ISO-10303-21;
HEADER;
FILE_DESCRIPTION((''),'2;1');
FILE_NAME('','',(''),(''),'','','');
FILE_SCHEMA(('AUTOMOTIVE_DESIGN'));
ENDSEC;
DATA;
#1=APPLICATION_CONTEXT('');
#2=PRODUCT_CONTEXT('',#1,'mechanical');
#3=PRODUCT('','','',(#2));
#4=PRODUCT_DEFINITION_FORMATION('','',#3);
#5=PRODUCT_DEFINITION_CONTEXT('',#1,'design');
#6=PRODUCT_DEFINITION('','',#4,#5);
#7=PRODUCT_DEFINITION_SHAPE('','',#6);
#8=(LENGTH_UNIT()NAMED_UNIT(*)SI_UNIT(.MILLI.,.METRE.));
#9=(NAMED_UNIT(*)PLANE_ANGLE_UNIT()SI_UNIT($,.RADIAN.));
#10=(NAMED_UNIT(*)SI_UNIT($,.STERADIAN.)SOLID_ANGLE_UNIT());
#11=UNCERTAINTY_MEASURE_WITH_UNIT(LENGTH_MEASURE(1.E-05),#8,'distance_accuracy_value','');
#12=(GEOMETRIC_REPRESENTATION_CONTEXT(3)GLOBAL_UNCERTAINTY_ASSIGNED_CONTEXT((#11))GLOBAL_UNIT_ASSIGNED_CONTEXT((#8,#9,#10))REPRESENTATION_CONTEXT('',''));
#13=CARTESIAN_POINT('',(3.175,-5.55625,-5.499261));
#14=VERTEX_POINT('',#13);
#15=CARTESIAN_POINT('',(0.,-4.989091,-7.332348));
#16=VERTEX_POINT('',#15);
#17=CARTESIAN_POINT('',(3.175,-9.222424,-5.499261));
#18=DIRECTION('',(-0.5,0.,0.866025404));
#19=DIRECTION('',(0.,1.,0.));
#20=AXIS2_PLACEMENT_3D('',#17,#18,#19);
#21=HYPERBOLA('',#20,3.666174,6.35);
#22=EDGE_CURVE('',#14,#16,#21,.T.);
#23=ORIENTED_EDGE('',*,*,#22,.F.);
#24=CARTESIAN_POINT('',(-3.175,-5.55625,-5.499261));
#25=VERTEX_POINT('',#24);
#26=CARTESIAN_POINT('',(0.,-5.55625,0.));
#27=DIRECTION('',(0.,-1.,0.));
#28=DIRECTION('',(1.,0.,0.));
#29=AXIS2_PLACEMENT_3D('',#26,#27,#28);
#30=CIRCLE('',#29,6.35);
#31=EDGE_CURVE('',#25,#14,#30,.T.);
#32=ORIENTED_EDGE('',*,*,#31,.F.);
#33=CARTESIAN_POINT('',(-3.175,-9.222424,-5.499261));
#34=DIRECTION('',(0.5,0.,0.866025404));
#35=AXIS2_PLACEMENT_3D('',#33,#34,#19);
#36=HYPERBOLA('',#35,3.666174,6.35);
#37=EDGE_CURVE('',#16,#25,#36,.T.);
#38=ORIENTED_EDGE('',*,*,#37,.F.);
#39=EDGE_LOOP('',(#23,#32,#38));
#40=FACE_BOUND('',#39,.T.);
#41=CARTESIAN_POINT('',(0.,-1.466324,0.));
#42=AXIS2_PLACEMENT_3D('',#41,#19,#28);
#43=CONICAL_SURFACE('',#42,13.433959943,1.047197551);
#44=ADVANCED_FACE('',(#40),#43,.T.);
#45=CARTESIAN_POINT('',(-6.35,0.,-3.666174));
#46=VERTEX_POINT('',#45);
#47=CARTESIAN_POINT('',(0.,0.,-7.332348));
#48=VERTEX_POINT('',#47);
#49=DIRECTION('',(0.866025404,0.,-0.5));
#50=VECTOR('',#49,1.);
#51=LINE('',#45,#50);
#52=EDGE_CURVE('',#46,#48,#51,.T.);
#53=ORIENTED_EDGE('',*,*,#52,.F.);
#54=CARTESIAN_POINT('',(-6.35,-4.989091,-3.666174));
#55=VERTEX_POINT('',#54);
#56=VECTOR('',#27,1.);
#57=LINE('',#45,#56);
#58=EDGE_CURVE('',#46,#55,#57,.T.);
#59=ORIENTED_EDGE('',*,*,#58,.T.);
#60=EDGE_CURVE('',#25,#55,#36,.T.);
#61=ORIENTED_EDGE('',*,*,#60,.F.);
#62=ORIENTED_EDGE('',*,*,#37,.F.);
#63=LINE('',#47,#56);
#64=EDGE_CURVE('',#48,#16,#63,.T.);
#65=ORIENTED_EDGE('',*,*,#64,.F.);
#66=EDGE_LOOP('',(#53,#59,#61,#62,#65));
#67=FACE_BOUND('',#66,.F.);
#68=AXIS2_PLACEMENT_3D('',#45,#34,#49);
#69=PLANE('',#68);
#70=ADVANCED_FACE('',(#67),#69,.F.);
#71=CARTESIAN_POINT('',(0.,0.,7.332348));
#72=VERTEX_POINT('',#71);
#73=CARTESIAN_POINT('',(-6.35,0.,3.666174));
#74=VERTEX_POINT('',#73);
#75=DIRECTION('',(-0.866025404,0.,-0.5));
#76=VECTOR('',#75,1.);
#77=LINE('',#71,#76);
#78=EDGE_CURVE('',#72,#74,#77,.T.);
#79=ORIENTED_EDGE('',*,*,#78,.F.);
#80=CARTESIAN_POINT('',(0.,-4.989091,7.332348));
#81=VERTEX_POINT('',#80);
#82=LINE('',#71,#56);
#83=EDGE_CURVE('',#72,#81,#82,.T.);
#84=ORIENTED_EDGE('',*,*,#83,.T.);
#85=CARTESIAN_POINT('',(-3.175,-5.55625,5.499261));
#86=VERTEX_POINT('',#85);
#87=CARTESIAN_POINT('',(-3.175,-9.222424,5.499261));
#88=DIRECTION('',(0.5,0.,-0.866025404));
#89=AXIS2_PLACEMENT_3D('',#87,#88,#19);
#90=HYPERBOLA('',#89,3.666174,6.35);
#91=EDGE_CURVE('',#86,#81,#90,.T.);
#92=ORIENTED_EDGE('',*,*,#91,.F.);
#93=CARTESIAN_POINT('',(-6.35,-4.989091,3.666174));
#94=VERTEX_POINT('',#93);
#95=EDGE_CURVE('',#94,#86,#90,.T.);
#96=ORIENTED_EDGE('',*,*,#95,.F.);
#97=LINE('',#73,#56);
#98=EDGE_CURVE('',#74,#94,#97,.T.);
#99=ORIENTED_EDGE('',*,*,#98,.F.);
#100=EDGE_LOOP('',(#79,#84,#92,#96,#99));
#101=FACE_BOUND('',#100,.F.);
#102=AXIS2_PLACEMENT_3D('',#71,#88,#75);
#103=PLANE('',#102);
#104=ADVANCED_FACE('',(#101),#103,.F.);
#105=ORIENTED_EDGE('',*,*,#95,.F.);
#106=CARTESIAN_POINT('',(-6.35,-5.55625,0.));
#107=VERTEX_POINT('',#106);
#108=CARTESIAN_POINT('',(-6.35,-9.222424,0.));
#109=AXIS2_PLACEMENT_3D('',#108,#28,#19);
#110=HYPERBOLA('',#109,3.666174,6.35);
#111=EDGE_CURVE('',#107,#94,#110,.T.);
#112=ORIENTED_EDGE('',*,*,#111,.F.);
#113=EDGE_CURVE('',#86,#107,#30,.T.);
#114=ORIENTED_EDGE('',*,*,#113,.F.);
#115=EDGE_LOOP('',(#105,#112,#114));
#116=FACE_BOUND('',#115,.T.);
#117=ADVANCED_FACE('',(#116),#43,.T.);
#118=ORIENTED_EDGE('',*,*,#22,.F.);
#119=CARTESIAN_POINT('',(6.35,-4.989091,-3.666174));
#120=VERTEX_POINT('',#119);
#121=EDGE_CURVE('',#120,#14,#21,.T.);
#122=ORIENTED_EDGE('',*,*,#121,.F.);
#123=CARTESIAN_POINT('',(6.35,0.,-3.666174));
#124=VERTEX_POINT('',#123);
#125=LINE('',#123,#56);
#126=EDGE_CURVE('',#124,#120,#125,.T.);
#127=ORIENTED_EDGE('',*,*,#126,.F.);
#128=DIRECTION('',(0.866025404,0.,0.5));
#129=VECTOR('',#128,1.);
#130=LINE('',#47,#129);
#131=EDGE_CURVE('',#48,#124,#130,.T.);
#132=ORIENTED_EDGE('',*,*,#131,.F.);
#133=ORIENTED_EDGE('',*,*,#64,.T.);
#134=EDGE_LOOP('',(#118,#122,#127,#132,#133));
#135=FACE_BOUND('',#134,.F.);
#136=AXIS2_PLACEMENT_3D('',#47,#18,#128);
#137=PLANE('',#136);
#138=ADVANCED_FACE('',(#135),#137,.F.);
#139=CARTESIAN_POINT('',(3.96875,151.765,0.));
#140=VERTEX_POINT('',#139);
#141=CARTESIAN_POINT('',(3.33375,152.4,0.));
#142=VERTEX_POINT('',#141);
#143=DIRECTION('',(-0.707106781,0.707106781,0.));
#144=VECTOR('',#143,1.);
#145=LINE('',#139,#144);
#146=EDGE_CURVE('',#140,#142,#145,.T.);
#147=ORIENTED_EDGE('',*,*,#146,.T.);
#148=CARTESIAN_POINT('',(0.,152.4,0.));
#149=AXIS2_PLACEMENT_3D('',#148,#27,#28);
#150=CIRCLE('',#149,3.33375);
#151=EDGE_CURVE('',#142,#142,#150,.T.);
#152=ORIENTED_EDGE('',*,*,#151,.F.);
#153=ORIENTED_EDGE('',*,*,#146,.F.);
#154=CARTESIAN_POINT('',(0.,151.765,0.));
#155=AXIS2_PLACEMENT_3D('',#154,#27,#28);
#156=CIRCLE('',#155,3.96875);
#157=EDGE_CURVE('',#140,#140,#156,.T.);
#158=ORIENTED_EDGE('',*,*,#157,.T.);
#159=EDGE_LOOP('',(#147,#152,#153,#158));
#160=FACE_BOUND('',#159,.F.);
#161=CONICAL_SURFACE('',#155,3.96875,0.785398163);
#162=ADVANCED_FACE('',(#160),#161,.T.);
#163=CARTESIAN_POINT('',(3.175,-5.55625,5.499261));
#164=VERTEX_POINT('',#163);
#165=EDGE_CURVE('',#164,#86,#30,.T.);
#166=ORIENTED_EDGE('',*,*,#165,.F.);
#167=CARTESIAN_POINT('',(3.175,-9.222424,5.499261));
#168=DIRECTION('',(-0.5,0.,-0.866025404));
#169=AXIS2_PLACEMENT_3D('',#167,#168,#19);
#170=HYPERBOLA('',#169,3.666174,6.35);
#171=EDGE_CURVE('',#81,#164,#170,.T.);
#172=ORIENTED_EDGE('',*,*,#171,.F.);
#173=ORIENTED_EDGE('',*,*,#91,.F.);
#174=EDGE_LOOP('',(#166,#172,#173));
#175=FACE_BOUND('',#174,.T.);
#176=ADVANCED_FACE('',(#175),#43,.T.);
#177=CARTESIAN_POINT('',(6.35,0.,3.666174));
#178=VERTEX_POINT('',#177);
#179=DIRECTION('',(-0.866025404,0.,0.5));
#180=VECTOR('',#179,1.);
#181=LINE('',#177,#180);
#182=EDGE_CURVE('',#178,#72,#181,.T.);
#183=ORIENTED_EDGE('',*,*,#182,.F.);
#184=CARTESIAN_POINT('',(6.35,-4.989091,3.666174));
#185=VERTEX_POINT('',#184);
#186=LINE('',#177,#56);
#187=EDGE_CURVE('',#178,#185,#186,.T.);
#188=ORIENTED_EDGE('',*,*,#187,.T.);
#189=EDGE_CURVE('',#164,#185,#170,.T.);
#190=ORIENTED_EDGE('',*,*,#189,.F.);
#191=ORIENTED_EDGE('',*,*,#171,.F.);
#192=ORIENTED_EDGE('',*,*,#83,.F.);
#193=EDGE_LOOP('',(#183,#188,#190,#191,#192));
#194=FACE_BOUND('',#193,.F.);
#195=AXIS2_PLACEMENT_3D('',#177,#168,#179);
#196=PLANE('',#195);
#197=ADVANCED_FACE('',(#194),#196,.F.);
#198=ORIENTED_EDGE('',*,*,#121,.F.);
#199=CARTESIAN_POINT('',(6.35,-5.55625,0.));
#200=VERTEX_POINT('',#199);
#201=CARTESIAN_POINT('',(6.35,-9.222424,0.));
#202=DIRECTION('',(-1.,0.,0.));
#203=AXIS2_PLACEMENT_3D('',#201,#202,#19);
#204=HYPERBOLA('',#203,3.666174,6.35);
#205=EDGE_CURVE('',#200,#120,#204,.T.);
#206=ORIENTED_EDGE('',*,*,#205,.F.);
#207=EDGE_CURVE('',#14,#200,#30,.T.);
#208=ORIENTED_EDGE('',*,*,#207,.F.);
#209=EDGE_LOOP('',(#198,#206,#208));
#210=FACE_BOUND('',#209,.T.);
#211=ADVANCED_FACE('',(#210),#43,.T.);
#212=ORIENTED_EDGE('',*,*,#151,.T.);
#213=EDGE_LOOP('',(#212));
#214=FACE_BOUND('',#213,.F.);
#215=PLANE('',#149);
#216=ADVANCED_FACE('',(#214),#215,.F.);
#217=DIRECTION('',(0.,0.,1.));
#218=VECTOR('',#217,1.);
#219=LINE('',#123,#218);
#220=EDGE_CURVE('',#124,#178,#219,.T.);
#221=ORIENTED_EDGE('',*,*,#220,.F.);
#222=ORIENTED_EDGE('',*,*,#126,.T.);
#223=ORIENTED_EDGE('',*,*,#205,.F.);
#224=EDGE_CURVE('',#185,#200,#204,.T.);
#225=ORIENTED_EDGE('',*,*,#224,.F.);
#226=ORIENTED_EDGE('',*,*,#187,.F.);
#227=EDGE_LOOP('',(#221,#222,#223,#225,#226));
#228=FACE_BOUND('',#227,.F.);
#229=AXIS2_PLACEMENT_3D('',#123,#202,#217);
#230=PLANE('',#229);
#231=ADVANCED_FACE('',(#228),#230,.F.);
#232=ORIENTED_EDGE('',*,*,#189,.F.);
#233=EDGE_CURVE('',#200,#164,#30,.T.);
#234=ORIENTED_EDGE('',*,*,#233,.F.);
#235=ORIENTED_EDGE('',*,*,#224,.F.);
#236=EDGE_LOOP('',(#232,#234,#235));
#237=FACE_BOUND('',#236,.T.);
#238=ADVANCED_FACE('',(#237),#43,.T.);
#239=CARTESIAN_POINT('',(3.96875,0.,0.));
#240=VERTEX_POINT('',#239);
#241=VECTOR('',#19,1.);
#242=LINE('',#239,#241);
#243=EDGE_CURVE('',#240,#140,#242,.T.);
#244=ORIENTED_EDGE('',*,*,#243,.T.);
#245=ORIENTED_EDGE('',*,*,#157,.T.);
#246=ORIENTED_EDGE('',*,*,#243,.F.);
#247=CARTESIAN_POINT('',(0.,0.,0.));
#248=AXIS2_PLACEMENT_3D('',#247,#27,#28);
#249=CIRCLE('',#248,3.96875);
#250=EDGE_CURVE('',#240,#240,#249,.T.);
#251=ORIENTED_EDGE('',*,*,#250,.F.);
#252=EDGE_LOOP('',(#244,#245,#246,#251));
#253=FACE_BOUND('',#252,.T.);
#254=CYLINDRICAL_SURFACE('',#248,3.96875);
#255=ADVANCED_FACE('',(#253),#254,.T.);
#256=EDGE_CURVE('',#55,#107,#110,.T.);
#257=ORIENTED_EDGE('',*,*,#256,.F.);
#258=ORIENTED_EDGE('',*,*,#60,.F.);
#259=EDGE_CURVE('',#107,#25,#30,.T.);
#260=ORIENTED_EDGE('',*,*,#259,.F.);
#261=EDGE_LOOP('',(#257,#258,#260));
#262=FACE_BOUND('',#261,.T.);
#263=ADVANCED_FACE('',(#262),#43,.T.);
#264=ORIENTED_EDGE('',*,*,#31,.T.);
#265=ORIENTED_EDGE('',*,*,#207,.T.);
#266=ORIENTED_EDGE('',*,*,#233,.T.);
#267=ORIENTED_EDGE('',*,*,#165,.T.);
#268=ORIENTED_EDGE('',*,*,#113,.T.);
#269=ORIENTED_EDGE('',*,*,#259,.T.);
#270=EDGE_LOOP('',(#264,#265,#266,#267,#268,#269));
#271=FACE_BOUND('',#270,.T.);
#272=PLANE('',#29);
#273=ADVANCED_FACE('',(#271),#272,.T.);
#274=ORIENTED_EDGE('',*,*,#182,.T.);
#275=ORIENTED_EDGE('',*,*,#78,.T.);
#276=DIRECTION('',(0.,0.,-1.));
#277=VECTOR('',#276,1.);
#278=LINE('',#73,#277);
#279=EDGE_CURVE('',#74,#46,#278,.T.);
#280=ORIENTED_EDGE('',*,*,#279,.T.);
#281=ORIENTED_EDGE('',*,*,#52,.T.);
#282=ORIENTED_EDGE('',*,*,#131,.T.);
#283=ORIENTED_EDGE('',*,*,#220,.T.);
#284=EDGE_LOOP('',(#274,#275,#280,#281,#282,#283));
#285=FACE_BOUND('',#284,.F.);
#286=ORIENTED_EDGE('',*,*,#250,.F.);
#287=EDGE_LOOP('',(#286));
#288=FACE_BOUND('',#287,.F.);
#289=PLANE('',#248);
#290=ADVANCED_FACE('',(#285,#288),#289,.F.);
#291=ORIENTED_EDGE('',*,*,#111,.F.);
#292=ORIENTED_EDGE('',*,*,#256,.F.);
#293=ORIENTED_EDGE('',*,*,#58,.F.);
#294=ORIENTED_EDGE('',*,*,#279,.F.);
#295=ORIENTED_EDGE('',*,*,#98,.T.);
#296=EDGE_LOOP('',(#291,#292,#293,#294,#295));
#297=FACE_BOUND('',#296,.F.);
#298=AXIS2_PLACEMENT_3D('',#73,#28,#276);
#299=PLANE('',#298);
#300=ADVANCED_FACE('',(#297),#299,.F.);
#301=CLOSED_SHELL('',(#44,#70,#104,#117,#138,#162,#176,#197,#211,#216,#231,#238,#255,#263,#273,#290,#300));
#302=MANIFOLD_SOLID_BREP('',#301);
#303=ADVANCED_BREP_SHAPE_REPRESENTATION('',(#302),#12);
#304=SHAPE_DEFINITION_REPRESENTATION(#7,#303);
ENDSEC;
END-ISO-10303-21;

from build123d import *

# Parameters (mm, degrees)
F2_R     = 3.96875
F3_DEPTH = 152.4
F5_DEPTH = 5.55625
F6_SIZE  = 0.635


# Not quite as in the source:
# - a length typed as a fraction of an inch, garbled in the dataset ("3 / 203.2 mm" for 3/8 in), is restored


with BuildPart() as f3:
    # F2 (on Front) → F3 (new body)
    with BuildSketch(Plane.XZ):
        Circle(F2_R)
    extrude(amount=-F3_DEPTH)

    # F4 (on Front) → F5 (join)
    with BuildSketch(Plane.XZ):
        Polygon((0, -7.3323484187), (6.35, -3.6661742094), (6.35, 3.6661742094), (0, 7.3323484187), (-6.35, 3.6661742094), (-6.35, -3.6661742094), align=None)
    extrude(amount=F5_DEPTH)

    # F6
    f6_edges = [f3.edges().sort_by_distance(p)[0] for p in [
        (-3.96875, 152.4, 0),
    ]]
    chamfer(f6_edges, length=F6_SIZE)

    # F7 (on Top) → F8 (revolve, cut)
    with BuildSketch(Plane.XY):
        Polygon((13.4339599431, -5.55625), (13.4339599431, -1.4663238199), (6.35, -5.55625), align=None)
    revolve(axis=Axis((0, -2.778125, 0), (0, -1, 0)), mode=Mode.SUBTRACT)


solid = f3.part
